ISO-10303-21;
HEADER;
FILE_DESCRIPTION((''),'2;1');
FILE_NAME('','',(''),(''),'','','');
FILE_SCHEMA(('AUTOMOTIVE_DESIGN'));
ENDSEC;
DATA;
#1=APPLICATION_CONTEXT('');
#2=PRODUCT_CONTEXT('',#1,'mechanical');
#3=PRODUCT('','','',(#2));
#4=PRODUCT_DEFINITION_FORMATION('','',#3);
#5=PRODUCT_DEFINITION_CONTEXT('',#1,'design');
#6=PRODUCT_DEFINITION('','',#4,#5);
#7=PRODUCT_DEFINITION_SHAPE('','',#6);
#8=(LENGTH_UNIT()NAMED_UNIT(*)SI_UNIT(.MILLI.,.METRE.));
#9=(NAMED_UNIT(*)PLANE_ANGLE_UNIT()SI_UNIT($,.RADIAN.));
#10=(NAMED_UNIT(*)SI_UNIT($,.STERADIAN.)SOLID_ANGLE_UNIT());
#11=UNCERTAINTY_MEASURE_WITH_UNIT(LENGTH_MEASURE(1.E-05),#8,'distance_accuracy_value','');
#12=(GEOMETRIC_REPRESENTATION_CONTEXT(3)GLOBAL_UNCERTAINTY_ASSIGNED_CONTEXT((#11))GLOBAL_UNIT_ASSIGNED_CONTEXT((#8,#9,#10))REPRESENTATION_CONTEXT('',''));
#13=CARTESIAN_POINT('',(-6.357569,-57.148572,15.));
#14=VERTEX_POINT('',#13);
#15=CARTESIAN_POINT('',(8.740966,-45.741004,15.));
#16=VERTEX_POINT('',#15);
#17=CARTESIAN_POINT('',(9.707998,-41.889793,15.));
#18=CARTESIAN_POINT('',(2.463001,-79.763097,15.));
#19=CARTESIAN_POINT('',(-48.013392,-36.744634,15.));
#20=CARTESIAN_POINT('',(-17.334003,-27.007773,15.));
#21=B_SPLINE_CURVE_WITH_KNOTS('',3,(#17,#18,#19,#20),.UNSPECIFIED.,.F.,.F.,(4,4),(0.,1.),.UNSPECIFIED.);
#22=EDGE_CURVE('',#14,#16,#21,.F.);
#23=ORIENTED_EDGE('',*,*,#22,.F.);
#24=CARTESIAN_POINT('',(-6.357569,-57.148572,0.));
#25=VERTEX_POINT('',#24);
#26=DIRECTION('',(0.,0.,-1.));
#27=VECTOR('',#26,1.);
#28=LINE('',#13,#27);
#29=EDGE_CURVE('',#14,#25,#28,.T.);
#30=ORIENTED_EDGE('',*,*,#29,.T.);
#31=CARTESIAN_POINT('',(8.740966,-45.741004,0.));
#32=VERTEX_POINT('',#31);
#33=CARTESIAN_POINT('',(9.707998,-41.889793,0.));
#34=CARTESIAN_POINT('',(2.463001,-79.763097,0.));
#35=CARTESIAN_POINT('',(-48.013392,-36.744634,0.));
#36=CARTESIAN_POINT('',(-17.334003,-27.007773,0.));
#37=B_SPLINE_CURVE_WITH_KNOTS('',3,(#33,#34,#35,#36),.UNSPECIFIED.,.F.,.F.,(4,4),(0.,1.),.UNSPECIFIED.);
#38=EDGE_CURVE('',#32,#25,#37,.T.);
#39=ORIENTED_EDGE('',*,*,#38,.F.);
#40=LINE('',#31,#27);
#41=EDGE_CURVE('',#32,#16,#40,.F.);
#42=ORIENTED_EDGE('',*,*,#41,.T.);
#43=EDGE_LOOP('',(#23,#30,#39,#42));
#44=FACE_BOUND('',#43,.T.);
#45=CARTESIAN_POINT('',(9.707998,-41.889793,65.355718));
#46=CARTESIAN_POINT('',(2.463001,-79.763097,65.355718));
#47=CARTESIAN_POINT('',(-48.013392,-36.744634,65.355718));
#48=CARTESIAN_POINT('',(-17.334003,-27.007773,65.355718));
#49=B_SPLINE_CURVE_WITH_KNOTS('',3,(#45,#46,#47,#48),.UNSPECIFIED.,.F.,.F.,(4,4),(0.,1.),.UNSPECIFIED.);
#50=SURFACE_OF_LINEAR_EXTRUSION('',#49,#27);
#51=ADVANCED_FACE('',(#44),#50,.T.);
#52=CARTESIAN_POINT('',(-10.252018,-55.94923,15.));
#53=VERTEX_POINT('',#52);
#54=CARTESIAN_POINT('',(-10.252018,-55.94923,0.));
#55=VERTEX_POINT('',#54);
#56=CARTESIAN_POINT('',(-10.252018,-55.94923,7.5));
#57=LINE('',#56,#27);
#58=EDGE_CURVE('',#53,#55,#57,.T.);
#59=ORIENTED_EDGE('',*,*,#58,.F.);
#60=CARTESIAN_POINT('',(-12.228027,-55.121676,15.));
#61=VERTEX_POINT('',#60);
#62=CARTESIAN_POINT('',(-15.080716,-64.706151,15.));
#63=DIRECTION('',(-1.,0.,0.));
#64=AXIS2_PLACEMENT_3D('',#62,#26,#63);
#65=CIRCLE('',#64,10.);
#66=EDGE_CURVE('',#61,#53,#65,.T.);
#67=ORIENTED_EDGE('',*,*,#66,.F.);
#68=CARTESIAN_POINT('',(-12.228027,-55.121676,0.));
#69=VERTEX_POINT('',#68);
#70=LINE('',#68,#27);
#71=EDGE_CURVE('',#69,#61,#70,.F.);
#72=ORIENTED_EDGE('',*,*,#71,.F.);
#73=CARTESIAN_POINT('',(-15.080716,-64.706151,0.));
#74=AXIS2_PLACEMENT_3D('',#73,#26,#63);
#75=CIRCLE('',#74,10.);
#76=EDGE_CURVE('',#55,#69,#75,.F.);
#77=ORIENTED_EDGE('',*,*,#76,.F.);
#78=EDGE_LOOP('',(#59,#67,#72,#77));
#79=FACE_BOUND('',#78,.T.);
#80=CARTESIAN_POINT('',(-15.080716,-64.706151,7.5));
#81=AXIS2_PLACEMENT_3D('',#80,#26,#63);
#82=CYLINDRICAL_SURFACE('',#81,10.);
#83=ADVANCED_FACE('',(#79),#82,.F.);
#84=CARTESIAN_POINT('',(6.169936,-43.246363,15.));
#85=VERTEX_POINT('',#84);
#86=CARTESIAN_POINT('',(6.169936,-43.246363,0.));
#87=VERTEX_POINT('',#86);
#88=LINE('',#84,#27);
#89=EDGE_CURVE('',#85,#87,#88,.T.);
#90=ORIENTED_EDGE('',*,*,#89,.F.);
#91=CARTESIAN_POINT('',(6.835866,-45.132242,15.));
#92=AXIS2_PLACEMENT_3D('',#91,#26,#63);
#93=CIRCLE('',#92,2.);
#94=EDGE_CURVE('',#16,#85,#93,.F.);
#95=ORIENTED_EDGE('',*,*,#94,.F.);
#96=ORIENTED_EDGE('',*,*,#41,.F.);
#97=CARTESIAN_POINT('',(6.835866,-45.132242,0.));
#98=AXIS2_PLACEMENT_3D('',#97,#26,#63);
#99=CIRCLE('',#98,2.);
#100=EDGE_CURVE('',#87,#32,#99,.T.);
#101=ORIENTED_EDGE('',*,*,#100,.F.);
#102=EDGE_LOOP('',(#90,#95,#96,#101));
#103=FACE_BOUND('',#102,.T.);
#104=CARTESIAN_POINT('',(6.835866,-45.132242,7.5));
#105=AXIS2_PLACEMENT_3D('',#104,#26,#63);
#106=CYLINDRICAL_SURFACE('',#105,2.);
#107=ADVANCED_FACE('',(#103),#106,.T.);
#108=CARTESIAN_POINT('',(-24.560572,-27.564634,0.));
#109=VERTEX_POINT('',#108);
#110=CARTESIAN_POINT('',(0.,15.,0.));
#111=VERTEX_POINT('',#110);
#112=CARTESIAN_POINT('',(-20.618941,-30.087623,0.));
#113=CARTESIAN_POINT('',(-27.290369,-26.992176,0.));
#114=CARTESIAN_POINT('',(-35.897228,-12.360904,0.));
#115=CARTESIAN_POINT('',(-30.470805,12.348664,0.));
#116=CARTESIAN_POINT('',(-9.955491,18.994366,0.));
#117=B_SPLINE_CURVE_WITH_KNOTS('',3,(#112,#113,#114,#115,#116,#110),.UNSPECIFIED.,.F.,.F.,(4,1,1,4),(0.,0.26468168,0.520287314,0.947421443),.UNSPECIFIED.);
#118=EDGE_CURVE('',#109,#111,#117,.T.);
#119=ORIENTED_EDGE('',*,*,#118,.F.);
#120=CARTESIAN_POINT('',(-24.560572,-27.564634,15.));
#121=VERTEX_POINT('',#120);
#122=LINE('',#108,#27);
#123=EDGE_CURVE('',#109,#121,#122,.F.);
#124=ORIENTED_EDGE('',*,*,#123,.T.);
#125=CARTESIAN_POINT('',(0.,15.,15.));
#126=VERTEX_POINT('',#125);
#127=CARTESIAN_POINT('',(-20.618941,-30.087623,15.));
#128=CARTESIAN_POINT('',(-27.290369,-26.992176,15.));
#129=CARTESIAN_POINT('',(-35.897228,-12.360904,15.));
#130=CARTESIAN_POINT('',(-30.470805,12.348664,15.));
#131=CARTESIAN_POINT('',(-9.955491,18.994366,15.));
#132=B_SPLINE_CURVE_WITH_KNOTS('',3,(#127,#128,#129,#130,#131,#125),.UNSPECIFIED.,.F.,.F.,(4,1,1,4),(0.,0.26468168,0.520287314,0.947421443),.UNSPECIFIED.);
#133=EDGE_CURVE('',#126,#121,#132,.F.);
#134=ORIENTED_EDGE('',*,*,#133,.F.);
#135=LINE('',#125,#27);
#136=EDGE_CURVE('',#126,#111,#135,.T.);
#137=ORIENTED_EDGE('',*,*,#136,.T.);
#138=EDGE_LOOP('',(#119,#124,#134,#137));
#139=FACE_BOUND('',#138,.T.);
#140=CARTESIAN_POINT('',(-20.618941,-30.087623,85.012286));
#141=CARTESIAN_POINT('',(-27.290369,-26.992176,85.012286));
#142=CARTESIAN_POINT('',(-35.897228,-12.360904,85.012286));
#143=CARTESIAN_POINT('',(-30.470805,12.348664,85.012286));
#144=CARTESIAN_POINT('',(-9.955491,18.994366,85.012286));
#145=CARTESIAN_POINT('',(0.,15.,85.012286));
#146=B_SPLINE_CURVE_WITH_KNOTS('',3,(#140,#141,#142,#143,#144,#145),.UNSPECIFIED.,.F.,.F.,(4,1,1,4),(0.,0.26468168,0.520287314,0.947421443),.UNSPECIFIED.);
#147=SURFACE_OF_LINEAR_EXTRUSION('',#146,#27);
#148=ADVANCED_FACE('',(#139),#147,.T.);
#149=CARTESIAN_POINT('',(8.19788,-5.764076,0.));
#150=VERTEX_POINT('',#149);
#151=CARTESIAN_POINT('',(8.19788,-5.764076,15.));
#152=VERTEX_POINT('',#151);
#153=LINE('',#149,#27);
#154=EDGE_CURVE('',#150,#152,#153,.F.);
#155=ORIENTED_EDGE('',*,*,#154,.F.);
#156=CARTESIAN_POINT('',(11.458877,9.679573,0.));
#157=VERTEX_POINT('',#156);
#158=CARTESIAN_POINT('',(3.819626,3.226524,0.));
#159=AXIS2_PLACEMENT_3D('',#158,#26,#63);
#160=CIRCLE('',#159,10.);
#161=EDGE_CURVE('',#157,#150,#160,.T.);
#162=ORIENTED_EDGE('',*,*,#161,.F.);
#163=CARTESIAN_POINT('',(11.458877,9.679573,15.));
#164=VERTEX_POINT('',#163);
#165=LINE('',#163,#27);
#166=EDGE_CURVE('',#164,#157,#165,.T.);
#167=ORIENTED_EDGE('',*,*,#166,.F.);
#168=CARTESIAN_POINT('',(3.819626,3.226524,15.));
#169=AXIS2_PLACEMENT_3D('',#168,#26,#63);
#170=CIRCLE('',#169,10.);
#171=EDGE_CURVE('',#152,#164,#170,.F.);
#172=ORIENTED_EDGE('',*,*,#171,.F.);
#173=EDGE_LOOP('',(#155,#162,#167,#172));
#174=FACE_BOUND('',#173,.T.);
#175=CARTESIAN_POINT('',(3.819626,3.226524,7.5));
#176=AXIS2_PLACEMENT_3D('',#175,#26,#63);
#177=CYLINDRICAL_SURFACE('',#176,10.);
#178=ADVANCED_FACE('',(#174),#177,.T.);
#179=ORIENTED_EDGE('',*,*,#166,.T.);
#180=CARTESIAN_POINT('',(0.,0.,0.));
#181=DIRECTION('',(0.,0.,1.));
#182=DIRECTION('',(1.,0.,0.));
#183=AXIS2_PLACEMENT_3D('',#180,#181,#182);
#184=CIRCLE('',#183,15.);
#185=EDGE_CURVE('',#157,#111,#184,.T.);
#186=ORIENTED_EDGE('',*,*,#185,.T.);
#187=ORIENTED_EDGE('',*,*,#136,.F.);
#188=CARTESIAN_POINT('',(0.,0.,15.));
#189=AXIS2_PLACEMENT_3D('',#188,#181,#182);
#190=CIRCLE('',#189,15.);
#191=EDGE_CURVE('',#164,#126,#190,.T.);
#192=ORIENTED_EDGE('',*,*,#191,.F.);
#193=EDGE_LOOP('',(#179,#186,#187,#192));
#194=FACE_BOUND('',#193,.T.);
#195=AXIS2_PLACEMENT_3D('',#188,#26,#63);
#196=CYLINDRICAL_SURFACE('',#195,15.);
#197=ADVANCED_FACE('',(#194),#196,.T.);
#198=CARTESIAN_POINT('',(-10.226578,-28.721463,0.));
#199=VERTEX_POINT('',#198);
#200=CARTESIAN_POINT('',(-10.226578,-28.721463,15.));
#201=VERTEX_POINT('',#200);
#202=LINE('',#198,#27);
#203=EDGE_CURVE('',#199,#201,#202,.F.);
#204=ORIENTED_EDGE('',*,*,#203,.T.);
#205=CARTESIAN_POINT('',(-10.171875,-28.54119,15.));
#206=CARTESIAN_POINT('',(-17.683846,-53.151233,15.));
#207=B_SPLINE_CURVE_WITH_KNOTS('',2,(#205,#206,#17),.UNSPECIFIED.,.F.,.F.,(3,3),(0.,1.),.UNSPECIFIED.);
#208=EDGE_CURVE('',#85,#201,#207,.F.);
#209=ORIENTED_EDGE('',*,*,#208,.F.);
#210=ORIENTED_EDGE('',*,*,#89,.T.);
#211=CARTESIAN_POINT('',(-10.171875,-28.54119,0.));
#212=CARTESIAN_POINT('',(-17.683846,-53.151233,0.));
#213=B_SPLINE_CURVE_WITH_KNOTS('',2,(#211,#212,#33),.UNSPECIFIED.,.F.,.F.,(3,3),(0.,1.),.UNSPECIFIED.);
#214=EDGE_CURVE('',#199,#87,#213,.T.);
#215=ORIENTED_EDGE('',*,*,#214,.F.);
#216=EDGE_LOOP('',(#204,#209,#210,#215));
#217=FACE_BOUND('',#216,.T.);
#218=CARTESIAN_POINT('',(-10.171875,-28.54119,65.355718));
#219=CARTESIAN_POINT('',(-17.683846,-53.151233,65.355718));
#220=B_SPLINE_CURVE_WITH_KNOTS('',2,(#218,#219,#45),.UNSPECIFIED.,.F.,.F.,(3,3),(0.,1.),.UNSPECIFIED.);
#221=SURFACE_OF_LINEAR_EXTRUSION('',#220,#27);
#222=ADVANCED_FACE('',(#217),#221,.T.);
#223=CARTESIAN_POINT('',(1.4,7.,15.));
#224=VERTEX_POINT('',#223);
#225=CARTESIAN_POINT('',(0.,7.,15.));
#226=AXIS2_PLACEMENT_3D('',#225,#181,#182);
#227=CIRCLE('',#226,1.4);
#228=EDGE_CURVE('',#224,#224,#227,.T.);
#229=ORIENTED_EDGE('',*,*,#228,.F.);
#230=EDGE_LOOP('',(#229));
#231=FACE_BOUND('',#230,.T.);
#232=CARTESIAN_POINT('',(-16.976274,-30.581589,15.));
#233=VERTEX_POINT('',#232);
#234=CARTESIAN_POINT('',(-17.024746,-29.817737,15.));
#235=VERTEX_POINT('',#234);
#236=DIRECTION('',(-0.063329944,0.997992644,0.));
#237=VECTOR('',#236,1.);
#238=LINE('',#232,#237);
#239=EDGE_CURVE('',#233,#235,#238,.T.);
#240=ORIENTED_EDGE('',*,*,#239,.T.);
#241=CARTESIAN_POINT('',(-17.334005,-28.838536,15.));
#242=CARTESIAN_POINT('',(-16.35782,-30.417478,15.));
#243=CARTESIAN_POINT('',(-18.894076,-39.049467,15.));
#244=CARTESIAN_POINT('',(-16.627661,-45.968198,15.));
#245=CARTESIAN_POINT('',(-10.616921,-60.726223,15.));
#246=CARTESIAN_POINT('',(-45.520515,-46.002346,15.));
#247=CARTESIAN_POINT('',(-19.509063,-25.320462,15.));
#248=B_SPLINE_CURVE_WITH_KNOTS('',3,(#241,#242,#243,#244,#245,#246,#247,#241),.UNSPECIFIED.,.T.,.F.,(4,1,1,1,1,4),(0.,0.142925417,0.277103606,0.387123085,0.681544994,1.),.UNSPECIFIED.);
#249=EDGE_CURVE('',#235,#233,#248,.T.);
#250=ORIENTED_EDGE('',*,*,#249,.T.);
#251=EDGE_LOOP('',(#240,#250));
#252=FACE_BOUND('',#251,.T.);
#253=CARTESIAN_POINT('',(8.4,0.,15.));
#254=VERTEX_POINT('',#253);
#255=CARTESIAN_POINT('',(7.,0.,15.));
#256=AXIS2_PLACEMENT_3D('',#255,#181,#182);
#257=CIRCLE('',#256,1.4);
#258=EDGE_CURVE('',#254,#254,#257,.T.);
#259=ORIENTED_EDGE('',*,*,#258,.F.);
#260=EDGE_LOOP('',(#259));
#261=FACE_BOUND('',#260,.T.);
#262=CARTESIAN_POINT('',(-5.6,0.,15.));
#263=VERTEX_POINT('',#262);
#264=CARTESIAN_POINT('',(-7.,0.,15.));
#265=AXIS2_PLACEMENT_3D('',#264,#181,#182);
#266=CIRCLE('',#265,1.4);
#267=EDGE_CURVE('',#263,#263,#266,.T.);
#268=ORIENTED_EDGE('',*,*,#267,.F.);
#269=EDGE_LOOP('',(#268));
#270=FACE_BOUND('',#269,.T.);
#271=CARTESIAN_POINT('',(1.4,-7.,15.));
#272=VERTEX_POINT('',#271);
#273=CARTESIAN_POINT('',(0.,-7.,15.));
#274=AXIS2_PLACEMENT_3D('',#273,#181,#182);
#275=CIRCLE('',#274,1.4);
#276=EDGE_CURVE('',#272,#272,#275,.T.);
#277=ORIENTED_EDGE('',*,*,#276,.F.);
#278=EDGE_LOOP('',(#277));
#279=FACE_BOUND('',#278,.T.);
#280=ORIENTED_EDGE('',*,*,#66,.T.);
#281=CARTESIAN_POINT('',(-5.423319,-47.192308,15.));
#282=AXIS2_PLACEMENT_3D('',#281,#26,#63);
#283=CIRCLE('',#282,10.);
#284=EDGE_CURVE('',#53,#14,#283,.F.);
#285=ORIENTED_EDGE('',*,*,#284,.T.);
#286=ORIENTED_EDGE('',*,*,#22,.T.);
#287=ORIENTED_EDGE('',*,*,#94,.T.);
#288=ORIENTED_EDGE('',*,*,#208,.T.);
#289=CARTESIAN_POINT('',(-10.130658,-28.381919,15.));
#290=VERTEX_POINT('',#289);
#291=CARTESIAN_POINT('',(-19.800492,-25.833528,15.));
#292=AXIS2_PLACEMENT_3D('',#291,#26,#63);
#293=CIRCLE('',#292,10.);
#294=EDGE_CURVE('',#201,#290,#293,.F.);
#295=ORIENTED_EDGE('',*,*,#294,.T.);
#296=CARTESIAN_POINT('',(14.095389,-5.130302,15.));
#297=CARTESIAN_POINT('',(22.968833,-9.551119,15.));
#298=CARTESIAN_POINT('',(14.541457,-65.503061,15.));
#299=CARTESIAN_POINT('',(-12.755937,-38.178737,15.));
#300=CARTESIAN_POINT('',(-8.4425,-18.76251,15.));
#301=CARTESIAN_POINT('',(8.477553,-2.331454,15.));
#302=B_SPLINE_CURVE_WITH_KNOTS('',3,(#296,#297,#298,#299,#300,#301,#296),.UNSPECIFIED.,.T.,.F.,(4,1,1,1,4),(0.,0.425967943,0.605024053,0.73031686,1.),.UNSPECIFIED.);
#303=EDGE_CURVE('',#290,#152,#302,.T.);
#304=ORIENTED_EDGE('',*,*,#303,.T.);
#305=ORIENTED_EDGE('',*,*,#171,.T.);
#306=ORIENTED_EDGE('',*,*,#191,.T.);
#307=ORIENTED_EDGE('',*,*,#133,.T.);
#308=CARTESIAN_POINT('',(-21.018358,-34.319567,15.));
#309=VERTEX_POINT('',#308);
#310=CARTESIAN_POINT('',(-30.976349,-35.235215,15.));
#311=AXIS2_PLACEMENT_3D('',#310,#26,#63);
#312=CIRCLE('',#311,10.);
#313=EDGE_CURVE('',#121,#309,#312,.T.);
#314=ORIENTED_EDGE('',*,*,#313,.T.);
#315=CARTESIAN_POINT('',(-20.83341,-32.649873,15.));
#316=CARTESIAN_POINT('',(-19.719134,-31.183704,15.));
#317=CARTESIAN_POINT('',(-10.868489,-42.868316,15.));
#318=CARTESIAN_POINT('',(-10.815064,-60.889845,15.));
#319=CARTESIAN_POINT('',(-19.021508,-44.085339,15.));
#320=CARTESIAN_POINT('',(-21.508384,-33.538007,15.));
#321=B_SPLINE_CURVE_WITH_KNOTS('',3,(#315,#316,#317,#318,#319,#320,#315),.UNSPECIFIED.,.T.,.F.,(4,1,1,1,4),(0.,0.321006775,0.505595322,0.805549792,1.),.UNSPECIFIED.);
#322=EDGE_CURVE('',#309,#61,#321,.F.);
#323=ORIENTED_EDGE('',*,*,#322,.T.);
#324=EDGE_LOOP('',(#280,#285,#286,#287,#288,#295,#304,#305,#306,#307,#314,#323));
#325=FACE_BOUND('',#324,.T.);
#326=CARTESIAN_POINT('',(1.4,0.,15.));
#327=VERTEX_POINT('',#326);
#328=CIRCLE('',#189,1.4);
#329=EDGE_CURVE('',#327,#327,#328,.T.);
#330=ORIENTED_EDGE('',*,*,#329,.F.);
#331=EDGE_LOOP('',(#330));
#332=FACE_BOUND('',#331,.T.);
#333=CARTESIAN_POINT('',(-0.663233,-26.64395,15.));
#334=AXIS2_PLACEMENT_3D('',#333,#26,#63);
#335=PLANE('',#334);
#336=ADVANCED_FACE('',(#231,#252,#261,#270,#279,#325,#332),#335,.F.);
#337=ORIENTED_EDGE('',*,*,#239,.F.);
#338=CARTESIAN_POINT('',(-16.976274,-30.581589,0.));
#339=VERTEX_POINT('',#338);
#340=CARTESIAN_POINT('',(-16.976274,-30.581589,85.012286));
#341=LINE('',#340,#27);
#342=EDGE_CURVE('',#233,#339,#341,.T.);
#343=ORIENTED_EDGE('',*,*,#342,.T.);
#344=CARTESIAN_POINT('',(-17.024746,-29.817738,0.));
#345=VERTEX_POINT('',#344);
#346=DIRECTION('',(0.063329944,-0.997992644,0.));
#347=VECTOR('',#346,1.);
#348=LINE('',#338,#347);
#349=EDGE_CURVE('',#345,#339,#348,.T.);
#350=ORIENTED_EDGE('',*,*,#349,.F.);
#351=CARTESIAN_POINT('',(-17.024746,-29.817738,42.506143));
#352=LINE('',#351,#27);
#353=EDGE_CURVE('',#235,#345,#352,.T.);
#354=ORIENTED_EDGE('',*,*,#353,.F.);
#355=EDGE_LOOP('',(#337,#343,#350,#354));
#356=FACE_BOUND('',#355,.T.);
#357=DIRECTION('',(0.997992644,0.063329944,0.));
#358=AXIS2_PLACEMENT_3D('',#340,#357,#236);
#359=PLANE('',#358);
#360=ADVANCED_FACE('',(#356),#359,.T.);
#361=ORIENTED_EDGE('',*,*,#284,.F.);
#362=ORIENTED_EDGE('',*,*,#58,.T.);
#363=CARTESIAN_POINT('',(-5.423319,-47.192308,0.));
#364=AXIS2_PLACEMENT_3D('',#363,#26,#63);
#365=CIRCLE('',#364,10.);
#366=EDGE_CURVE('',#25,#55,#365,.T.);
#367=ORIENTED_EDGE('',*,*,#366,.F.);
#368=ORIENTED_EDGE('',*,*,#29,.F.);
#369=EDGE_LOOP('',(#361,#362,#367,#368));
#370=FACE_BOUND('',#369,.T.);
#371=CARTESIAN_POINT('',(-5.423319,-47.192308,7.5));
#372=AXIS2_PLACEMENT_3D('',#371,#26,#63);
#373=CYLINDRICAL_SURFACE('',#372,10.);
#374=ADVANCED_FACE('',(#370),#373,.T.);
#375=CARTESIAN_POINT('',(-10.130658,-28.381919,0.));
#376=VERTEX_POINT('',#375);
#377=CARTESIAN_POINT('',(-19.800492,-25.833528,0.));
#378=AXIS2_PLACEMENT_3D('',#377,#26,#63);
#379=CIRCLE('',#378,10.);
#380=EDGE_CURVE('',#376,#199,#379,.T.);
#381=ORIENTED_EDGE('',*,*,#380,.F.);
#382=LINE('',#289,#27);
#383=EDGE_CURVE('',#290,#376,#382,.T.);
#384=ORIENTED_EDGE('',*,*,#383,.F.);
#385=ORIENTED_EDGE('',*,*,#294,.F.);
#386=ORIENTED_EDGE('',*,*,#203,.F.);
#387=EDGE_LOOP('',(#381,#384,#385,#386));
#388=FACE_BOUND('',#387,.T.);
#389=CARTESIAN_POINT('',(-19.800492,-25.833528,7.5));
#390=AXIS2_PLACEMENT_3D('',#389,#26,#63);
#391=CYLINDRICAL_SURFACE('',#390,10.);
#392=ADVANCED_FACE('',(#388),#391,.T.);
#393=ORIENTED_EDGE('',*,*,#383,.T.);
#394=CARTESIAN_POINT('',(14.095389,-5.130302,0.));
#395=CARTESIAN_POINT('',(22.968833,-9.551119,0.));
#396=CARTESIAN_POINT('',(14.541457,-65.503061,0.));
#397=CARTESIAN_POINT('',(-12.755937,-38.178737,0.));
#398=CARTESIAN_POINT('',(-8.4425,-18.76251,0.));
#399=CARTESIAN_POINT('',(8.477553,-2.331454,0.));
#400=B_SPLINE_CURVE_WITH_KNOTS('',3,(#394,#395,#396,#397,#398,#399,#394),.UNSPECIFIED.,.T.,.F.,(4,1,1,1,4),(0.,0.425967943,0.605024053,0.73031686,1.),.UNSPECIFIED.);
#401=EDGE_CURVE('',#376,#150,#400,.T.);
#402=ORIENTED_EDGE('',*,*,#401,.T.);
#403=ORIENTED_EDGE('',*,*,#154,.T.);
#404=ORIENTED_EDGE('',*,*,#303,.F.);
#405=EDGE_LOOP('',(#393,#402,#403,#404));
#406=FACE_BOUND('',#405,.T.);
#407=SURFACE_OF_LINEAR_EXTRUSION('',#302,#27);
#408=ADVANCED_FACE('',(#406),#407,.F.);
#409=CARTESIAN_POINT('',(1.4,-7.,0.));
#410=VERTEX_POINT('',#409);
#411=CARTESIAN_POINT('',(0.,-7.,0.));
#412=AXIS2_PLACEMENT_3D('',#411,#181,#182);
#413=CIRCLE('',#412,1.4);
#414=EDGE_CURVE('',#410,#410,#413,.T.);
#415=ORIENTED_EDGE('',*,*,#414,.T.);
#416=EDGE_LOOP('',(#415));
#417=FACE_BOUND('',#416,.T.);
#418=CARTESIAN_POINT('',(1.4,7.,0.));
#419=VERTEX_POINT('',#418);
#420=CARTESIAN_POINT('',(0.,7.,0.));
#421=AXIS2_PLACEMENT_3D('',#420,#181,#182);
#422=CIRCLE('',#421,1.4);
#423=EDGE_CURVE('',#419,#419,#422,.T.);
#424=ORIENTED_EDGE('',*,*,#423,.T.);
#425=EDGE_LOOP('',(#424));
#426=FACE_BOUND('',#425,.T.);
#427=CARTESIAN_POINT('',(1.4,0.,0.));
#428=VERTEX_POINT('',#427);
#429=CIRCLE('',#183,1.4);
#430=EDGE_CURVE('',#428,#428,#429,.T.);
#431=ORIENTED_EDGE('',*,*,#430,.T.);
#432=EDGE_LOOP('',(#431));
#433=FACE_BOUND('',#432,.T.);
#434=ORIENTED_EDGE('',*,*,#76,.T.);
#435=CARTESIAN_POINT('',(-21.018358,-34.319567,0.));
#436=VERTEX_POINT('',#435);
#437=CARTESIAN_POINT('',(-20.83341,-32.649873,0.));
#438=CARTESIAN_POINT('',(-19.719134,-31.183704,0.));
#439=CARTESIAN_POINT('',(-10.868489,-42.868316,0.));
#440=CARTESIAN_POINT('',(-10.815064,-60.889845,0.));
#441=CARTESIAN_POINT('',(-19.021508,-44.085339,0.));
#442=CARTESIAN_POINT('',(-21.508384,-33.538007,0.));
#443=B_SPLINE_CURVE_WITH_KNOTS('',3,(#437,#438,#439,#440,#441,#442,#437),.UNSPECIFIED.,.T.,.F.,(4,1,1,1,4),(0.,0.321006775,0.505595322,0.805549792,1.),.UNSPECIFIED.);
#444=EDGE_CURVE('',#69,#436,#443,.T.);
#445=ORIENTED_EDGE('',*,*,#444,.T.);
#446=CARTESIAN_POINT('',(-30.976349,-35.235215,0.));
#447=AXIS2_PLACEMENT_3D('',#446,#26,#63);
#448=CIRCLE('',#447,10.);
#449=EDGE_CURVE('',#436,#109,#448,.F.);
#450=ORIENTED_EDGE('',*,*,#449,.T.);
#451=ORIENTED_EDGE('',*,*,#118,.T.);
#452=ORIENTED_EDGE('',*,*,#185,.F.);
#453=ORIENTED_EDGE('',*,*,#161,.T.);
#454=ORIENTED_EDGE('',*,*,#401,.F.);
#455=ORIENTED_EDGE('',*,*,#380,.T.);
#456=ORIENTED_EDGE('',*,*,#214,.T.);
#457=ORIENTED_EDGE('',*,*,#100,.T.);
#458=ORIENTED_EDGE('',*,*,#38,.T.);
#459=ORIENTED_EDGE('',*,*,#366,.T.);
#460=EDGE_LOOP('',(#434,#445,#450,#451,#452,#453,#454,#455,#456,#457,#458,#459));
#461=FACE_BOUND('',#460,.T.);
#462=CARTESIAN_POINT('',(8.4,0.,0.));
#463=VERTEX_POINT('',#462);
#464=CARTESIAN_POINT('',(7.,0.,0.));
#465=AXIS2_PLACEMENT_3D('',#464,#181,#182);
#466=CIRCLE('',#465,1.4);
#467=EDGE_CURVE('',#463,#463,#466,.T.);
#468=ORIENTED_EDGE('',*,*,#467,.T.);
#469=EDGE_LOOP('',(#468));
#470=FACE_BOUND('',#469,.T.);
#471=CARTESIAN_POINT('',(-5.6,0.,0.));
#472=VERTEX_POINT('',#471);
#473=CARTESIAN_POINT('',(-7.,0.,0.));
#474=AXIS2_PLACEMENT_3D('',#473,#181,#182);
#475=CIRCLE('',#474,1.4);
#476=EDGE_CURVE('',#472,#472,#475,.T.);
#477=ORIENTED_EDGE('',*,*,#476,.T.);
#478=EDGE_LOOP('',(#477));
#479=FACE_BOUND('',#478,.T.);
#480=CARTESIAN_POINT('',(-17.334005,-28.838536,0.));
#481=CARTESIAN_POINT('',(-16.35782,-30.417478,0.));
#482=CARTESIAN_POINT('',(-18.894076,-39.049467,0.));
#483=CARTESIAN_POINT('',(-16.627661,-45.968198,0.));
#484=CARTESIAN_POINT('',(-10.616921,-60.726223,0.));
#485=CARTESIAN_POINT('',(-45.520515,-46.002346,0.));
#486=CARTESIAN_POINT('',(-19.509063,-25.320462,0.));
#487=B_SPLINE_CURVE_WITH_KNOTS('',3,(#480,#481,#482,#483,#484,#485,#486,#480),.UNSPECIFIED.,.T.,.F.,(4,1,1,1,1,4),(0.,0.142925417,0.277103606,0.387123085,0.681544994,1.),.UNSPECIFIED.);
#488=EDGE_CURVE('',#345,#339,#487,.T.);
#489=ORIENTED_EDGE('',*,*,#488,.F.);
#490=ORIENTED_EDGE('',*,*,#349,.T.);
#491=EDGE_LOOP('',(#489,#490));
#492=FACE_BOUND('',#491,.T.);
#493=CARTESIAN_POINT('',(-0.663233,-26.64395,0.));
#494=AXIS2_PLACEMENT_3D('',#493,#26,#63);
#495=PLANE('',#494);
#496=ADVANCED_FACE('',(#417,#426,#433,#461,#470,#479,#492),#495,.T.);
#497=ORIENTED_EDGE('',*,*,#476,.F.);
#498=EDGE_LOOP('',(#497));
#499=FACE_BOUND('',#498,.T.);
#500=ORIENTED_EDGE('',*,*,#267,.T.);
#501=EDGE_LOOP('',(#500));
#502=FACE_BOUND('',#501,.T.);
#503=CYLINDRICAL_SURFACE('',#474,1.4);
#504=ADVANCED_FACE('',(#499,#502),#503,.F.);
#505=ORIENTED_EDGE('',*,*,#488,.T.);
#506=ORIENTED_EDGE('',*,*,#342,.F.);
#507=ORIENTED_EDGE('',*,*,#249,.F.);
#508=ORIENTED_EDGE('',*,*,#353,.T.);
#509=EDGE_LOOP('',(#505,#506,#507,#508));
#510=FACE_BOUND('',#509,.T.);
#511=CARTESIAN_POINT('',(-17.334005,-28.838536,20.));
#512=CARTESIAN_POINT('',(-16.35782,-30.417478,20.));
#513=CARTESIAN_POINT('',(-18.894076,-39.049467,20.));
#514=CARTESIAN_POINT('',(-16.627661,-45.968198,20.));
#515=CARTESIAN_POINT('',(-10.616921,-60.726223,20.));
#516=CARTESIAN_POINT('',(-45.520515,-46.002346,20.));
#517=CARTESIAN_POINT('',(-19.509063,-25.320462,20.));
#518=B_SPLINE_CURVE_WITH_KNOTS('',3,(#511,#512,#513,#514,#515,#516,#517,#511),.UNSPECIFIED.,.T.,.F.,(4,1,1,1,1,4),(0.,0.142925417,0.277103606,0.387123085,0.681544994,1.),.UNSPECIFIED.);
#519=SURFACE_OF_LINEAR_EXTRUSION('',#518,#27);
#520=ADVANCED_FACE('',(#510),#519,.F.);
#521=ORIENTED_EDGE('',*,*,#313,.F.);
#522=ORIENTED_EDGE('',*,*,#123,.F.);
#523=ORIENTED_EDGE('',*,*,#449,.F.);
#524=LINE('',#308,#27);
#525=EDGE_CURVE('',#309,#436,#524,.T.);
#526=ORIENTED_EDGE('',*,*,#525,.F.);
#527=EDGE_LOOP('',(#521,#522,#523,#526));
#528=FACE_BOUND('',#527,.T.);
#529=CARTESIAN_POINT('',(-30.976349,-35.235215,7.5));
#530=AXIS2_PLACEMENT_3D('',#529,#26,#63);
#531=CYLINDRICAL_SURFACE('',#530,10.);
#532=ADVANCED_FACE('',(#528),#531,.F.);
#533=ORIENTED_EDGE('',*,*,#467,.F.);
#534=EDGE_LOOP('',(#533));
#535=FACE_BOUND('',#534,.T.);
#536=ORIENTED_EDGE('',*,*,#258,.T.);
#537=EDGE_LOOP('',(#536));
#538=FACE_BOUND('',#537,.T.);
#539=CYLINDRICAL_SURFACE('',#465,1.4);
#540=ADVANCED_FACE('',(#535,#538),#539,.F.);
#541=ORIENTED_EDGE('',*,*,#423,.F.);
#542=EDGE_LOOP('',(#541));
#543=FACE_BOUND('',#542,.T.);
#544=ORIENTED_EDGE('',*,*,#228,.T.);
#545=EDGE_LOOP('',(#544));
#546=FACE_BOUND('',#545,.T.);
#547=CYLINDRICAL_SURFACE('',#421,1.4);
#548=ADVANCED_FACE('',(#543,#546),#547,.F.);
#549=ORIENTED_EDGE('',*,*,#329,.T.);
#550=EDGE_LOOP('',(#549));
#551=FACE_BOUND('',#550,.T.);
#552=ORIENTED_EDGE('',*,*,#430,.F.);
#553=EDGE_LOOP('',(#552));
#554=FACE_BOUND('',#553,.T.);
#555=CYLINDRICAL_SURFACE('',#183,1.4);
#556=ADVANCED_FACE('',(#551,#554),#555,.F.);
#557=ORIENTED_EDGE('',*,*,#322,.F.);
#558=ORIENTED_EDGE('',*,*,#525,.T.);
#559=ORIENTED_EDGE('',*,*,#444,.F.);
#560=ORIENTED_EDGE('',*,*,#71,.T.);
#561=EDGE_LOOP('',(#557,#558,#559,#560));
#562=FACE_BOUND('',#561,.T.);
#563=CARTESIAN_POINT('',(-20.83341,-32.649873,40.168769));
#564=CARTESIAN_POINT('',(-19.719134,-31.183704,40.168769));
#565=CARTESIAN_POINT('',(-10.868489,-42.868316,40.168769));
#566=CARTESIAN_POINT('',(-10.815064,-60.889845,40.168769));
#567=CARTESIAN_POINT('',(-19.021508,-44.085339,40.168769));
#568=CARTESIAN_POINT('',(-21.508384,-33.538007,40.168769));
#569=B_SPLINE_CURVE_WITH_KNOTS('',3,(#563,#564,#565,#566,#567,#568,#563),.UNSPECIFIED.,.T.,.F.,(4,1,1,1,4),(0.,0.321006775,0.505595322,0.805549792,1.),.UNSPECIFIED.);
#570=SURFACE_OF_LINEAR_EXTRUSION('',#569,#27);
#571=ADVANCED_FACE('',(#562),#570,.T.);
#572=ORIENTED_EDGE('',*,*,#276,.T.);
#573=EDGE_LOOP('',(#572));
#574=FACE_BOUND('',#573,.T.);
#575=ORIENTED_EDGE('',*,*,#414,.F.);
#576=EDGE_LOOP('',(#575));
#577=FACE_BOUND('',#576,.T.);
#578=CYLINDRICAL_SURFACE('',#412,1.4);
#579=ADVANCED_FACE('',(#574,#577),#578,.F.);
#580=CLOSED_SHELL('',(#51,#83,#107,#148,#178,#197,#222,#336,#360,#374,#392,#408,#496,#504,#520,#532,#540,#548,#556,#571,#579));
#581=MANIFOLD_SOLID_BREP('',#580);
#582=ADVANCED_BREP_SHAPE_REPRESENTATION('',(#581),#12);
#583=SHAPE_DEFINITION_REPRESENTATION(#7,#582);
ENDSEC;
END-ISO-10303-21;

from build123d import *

# Parameters (mm, degrees)
EXTRUDE_1_DEPTH     = 15
SKETCH_3_R          = 1.4
CUT_EXTRUDE_2_DEPTH = 45.491091955
CUT_EXTRUDE_3_DEPTH = 45.491091955
EXTRUDE_2_DEPTH     = 15
FILLET_1_R          = 2
FILLET_START        = -1
FILLET_2_DEPTH      = 17
FILLET_3_R          = 10
CUT_EXTRUDE_4_DEPTH = 20
CUT_EXTRUDE_5_DEPTH = 20
EXTRUDE_3_DEPTH     = 15
FILLET_10_DEPTH     = 17
FILLET_10_2_DEPTH   = 15
FILLET_11_R         = 5
FILLET_12_R         = 10
EXTRUDE_4_DEPTH     = 15
FILLET_13_R         = 10


with BuildPart() as part:
    # 草图1 → 凸台-拉伸1 (new body)
    with BuildSketch(Plane.XY):
        with BuildLine():
            ThreePointArc((14.095389312, -5.13030215), (12.287280664, 8.603646545), (0, 15))
            add(Edge.make_bspline(
                [(0, 15), (-0.174596768, 14.999999319), (-0.436611581, 14.999693042), (-0.786186323, 14.998643785), (-1.048915847, 14.997519085), (-1.312216235, 14.99603471), (-1.576228693, 14.994161918), (-1.84109342, 14.991865662), (-2.106949414, 14.989104591), (-2.373934268, 14.985831089), (-2.642183971, 14.981991319), (-2.911832716, 14.977525266), (-3.1830127, 14.972366794), (-3.455853932, 14.966443701), (-3.730484039, 14.959677782), (-4.007028071, 14.9519849), (-4.285608318, 14.943275054), (-4.566344116, 14.933452466), (-4.849351664, 14.922415656), (-5.134743838, 14.910057537), (-5.422630012, 14.896265505), (-5.713115875, 14.880921543), (-6.006303259, 14.863902316), (-6.302289959, 14.84507929), (-6.601169567, 14.824318836), (-6.903031299, 14.801482354), (-7.207959833, 14.776426392), (-7.516035146, 14.749002775), (-7.827332351, 14.719058736), (-8.141921549, 14.686437053), (-8.459867669, 14.650976187), (-8.781230323, 14.612510428), (-9.106063662, 14.570870045), (-9.434416233, 14.525881438), (-9.766330843, 14.477367292), (-10.101844426, 14.425146744), (-10.440987913, 14.36903554), (-10.783786108, 14.30884621), (-11.130257567, 14.244388236), (-11.480414483, 14.175468229), (-11.834262574, 14.101890107), (-12.191800976, 14.023455277), (-12.553022141, 13.939962822), (-12.917911738, 13.851209688), (-13.286448564, 13.756990875), (-13.658604451, 13.657099633), (-14.03434419, 13.551327657), (-14.413625446, 13.439465288), (-14.796398691, 13.321301714), (-15.182607133, 13.196625177), (-15.572186657, 13.065223175), (-15.965065767, 12.926882676), (-16.361165533, 12.781390325), (-16.760399548, 12.62853266), (-17.162673883, 12.468096321), (-17.567887059, 12.299868276), (-17.975930009, 12.12363602), (-18.386686074, 11.939187837), (-18.800030904, 11.746312879), (-19.21583277, 11.544801919), (-19.63395132, 11.334445536), (-20.054242271, 11.115042096), (-20.476539575, 10.886368472), (-20.900723293, 10.648292485), (-21.326461435, 10.400346233), (-21.753514654, 10.143757392), (-22.178049863, 9.87535726), (-22.595959424, 9.592299141), (-23.006858872, 9.296248411), (-23.410215858, 8.987163154), (-23.805723663, 8.665361009), (-24.19302422, 8.331073979), (-24.571782966, 7.984568061), (-24.94166894, 7.626110759), (-25.302360391, 7.255979562), (-25.65354351, 6.874459377), (-25.994913004, 6.481842935), (-26.326172169, 6.078430394), (-26.647033089, 5.664529144), (-26.957216795, 5.240453567), (-27.256453426, 4.80652479), (-27.544482381, 4.363070443), (-27.82105247, 3.910424411), (-28.085922052, 3.448926584), (-28.338859169, 2.978922599), (-28.579641679, 2.500763586), (-28.808057373, 2.014805906), (-29.023904095, 1.521410888), (-29.226989847, 1.020944566), (-29.417132895, 0.513777409), (-29.594161862, 0.000284053), (-29.757915818, -0.519156969), (-29.908244365, -1.044163505), (-30.045007708, -1.574350056), (-30.168076728, -2.109328051), (-30.277333041, -2.648706129), (-30.372669056, -3.192090415), (-30.453988019, -3.739084801), (-30.521204062, -4.289291227), (-30.574242228, -4.842309963), (-30.613038507, -5.39773989), (-30.637539851, -5.955178784), (-30.647704191, -6.514223598), (-30.643500444, -7.074470745), (-30.624908509, -7.63551638), (-30.591919266, -8.196956684), (-30.544534557, -8.758388145), (-30.48276717, -9.319407838), (-30.406640805, -9.879613709), (-30.316190047, -10.438604851), (-30.21146032, -10.995981785), (-30.092507839, -11.551346736), (-29.95939956, -12.104303912), (-29.812213112, -12.654459772), (-29.651036733, -13.201423307), (-29.475969194, -13.744806302), (-29.287119719, -14.284223615), (-29.084607895, -14.819293432), (-28.868563581, -15.349637541), (-28.639126801, -15.874881588), (-28.396447646, -16.394655341), (-28.140686152, -16.908592941), (-27.872012186, -17.416333158), (-27.590605319, -17.917519643), (-27.296654692, -18.411801174), (-26.990358881, -18.898831896), (-26.671925755, -19.378271573), (-26.341572303, -19.849785794), (-25.885480421, -20.467504768), (-25.526267712, -20.917866263), (-25.279466623, -21.21199112)],
                knots=[0, 0, 0, 0, 0.008983592, 0.013481544, 0.017986876, 0.022502032, 0.027029448, 0.031571543, 0.036130722, 0.040709366, 0.045309838, 0.049934477, 0.054585593, 0.059265472, 0.063976367, 0.068720504, 0.073500073, 0.078317234, 0.083174111, 0.088072793, 0.093015336, 0.098003759, 0.103040044, 0.108126138, 0.113263955, 0.118455369, 0.123702222, 0.129006319, 0.134369433, 0.139793302, 0.145279632, 0.150830096, 0.156446337, 0.162129965, 0.167882565, 0.173705688, 0.179600863, 0.185569587, 0.191613334, 0.197733555, 0.203931674, 0.210209093, 0.216567194, 0.223007337, 0.229530862, 0.236139089, 0.242833322, 0.249614847, 0.256484933, 0.263444834, 0.270495789, 0.277639024, 0.284875752, 0.292207171, 0.299634469, 0.307158825, 0.314781404, 0.322503362, 0.330325849, 0.338250002, 0.346276954, 0.354407827, 0.362643738, 0.370985797, 0.379435108, 0.387992769, 0.396619209, 0.405274739, 0.413959558, 0.422673829, 0.431417677, 0.440191194, 0.448994436, 0.457827427, 0.466690157, 0.475582587, 0.484504647, 0.493456237, 0.50243723, 0.511447469, 0.520486775, 0.529554938, 0.538651727, 0.547776885, 0.556930133, 0.566111169, 0.575319669, 0.584555288, 0.593817663, 0.603106409, 0.612421123, 0.621761385, 0.631126755, 0.64051678, 0.649930987, 0.659368891, 0.66882999, 0.678313767, 0.687819694, 0.697347228, 0.706895812, 0.71646488, 0.726053851, 0.735662137, 0.745289135, 0.754934234, 0.764596814, 0.774276244, 0.783971886, 0.793683092, 0.803409207, 0.813149569, 0.822903507, 0.832670344, 0.8424494, 0.852239983, 0.862041401, 0.871852953, 0.881673937, 0.891503642, 0.901341356, 0.911186363, 0.921037943, 0.930895373, 0.940757928, 0.95062488, 0.960495499, 0.970369054, 0.980244811, 1, 1, 1, 1], degree=3))
            add(Edge.make_bspline(
                [(-25.279466623, -21.21199112), (-25.03266702, -21.506118015), (-24.650058643, -21.936850324), (-24.116326131, -22.48889957), (-23.704647777, -22.89139552), (-23.281933222, -23.282038607), (-22.848561661, -23.660506241), (-22.404923763, -24.026490317), (-21.951421131, -24.379697722), (-21.48846567, -24.719850743), (-21.016478952, -25.046687464), (-20.535891561, -25.359962134), (-20.047142425, -25.659445508), (-19.550678137, -25.944925156), (-19.04695226, -26.216205747), (-18.536424623, -26.4731093), (-18.019560603, -26.715475403), (-17.496830406, -26.943161412), (-16.968708336, -27.156042604), (-16.435672059, -27.354012309), (-15.898201862, -27.536982008), (-15.35677991, -27.704881402), (-14.811889501, -27.857658441), (-14.264014323, -27.995279333), (-13.713637708, -28.117728512), (-13.161241887, -28.225008578), (-12.607307258, -28.317140209), (-12.052311649, -28.394162034), (-11.496729594, -28.456130483), (-10.941031611, -28.5031196), (-10.385683496, -28.535220833), (-9.831145623, -28.552542784), (-9.277872252, -28.555210939), (-8.726310862, -28.543367367), (-8.176901485, -28.517170386), (-7.630076062, -28.476794208), (-7.086257816, -28.422428554), (-6.545860639, -28.354278239), (-6.009288499, -28.272562744), (-5.476934872, -28.177515748), (-4.949182183, -28.069384646), (-4.426401286, -27.948430045), (-3.908950946, -27.814925234), (-3.397177365, -27.669155633), (-2.891413716, -27.511418228), (-2.391979716, -27.342020982), (-1.899181211, -27.161282232), (-1.413309805, -26.969530066), (-0.934642496, -26.767101692), (-0.463441361, -26.554342786), (4.6748e-05, -26.331606829), (0.455590466, -26.099254437), (0.902974156, -25.857652676), (1.341998114, -25.607174371), (1.77247875, -25.348197408), (2.194248731, -25.081104026), (2.607157097, -24.806280109), (3.011069352, -24.524114474), (3.405867507, -24.234998154), (3.791450116, -23.939323681), (4.167732256, -23.637484373), (4.534645494, -23.329873622), (4.892137816, -23.016884179), (5.240173528, -22.698907455), (5.578733117, -22.376332816), (5.907813101, -22.049546899), (6.22742583, -21.71893292), (6.537599266, -21.384870008), (6.838376738, -21.047732541), (7.129816662, -20.707889495), (7.411992235, -20.365703811), (7.684991105, -20.021531772), (7.948915008, -19.675722401), (8.20387939, -19.32861687), (8.450012994, -18.980547932), (8.687457427, -18.631839373), (8.916366703, -18.282805481), (9.136906768, -17.933750534), (9.349254998, -17.58496832), (9.553599678, -17.236741672), (9.750139466, -16.889342026), (9.939082834, -16.543029011), (10.120647493, -16.198050057), (10.295059808, -15.854640037), (10.462554187, -15.513020927), (10.623372469, -15.173401503), (10.777763289, -14.835977057), (10.925981441, -14.50092915), (11.068287227, -14.168425389), (11.204945795, -13.838619231), (11.336226478, -13.511649827), (11.462402118, -13.187641886), (11.583748391, -12.866705573), (11.70054313, -12.548936438), (11.813065642, -12.234415378), (11.921596028, -11.923208621), (12.026414502, -11.615367753), (12.127800711, -11.310929767), (12.226033064, -11.009917143), (12.321388061, -10.712337965), (12.414139626, -10.418186058), (12.504558455, -10.127441167), (12.592911364, -9.840069152), (12.679460654, -9.556022225), (12.76446348, -9.275239204), (12.848171238, -8.997645806), (12.93082896, -8.723154954), (13.01267473, -8.451667126), (13.093939106, -8.183070715), (13.174844564, -7.917242422), (13.255604965, -7.654047671), (13.336425025, -7.393341046), (13.417499824, -7.134966749), (13.49901432, -6.87875908), (13.581142893, -6.624542932), (13.664048917, -6.372134315), (13.747884322, -6.121340875), (13.832789331, -5.871962488), (13.947500586, -5.541332702), (14.035654827, -5.294414261), (14.095389312, -5.13030215)],
                knots=[0, 0, 0, 0, 0.021270399, 0.031903677, 0.042534645, 0.053162531, 0.063786554, 0.074405932, 0.085019874, 0.095627584, 0.106228257, 0.116821079, 0.127405228, 0.137979868, 0.148544155, 0.15909723, 0.169638222, 0.180166248, 0.190680407, 0.201179787, 0.211663457, 0.222130473, 0.232579872, 0.243010676, 0.253421887, 0.263812492, 0.27418146, 0.284527741, 0.294850266, 0.30514795, 0.315419689, 0.32566436, 0.335880824, 0.346067921, 0.356224476, 0.366349296, 0.376441173, 0.386498878, 0.396521172, 0.406506796, 0.416454478, 0.426362934, 0.436230863, 0.446056956, 0.45583989, 0.465578331, 0.475270938, 0.48491636, 0.49451324, 0.504060215, 0.513555916, 0.522998973, 0.532388013, 0.541721663, 0.550998551, 0.560217309, 0.569376572, 0.578474983, 0.587511192, 0.596483859, 0.605391658, 0.614233274, 0.623007411, 0.631712789, 0.640348151, 0.64891226, 0.657403907, 0.66582191, 0.674165115, 0.682432404, 0.690622694, 0.69873494, 0.706768137, 0.714721328, 0.7225936, 0.730384093, 0.738092, 0.745716573, 0.753257123, 0.760713027, 0.76808373, 0.775368751, 0.782567685, 0.789680206, 0.796706075, 0.803645143, 0.810497353, 0.81726275, 0.823941479, 0.830533798, 0.837040075, 0.8434608, 0.849796585, 0.856048172, 0.86221644, 0.868302406, 0.874307234, 0.880232236, 0.886078882, 0.891848803, 0.897543794, 0.903165817, 0.908717009, 0.914199683, 0.919616328, 0.924969613, 0.930262387, 0.935497677, 0.94067869, 0.945808804, 0.950891568, 0.955930696, 0.960930056, 0.965893662, 0.970825666, 0.975730339, 0.980612064, 0.985475315, 0.990324642, 1, 1, 1, 1], degree=3))
        make_face()
    extrude(amount=EXTRUDE_1_DEPTH)

    # 草图3 → 切除-拉伸2 (cut, through all)
    with BuildSketch(Plane.XY.offset(15)):
        Circle(SKETCH_3_R)
        with Locations((7, 0)):
            Circle(SKETCH_3_R)
        with Locations((0, -7)):
            Circle(SKETCH_3_R)
        with Locations((-7, 0)):
            Circle(SKETCH_3_R)
        with Locations((0, 7)):
            Circle(SKETCH_3_R)
    extrude(amount=-CUT_EXTRUDE_2_DEPTH, mode=Mode.SUBTRACT)

    # 草图4 → 切除-拉伸3 (cut, through all)
    with BuildSketch(Plane(origin=(0, 0, 0), x_dir=(-1, 0, 0), z_dir=(0, 0, -1))):
        with BuildLine():
            add(Edge.make_bspline(
                [(-14.095389312, -5.13030215), (-8.477553271, -2.33145367), (8.442499566, -18.762509722), (12.755936915, -38.178736967), (-14.541457389, -65.503061248), (-22.968832669, -9.551118862), (-14.095389312, -5.13030215)],
                knots=[0, 0, 0, 0, 0.26968314, 0.394975947, 0.574032057, 1, 1, 1, 1], degree=3))
        make_face()
    extrude(amount=-CUT_EXTRUDE_3_DEPTH, mode=Mode.SUBTRACT)

    # 草图5 → 凸台-拉伸2 (add)
    with BuildSketch(Plane(origin=(0, 0, 0), x_dir=(-1, 0, 0), z_dir=(0, 0, -1))):
        with BuildLine():
            add(Edge.make_bspline(
                [(10.171874722, -28.541189548), (17.683846291, -53.151232988), (-9.707997946, -41.889793219)],
                knots=[0, 0, 0, 1, 1, 1], degree=2))
            add(Edge.make_bspline(
                [(-9.707997946, -41.889793219), (-2.463001099, -79.763097153), (48.013392254, -36.744634011), (17.334003198, -27.007773326)],
                knots=[0, 0, 0, 0, 1, 1, 1, 1], degree=3))
            add(Edge.make_bspline(
                [(17.334003198, -27.007773326), (16.861768371, -27.20105705), (16.027625054, -27.506859328), (14.814842143, -27.864848675), (13.716286363, -28.124971876), (12.609659956, -28.324417343), (11.498796153, -28.463423353), (10.685046818, -28.521336018), (10.242958884, -28.538751516), (10.171874722, -28.541189548)],
                knots=[0.183395931, 0.183395931, 0.183395931, 0.183395931, 0.211663457, 0.232579872, 0.253421887, 0.27418146, 0.294850266, 0.315419689, 0.319359962, 0.319359962, 0.319359962, 0.319359962], degree=3))
        make_face()
    extrude(amount=-EXTRUDE_2_DEPTH)

    # 圆角1
    fillet_1_edges = [part.edges().sort_by_distance(p)[0] for p in [
        (9.707997946, -41.889793219, 7.5),
    ]]
    fillet(fillet_1_edges, radius=FILLET_1_R)

    # 圆角2: read off the stored shape, not the designer's step
    # 圆角2 outline → 圆角2 (cut)
    with BuildSketch(Plane.XY.offset(FILLET_START)):
        with BuildLine():
            add(Edge.make_bspline(
                [(-10.171874722, -28.541189548), (-10.158393322, -28.488116713), (-10.144653776, -28.435026787), (-10.130657706, -28.381918891)],
                knots=[0.681495055, 0.681495055, 0.681495055, 0.681495055, 0.683012829, 0.683012829, 0.683012829, 0.683012829], degree=3))
            ThreePointArc((-10.130657706, -28.381918891), (-10.17712039, -28.552114075), (-10.226578366, -28.721463095))
            add(Edge.make_bspline(
                [(-10.171874722, -28.541189548), (-10.199461913, -28.631568216), (-10.226578366, -28.721463095)],
                knots=[0, 0, 0, 0.00367243, 0.00367243, 0.00367243], degree=2))
        make_face()
    extrude(amount=FILLET_2_DEPTH, mode=Mode.SUBTRACT)

    # 圆角3
    fillet_3_edges = [part.edges().sort_by_distance(p)[0] for p in [
        (14.095389312, -5.13030215, 7.5),
    ]]
    fillet(fillet_3_edges, radius=FILLET_3_R)

    # 草图6 → 切除-拉伸4 (cut)
    with BuildSketch(Plane(origin=(0, 0, 0), x_dir=(-1, 0, 0), z_dir=(0, 0, -1))):
        with BuildLine():
            ThreePointArc((17.334004909, -28.838535505), (17.371905963, -27.923154694), (17.334004909, -27.007773884))
            add(Edge.make_bspline(
                [(13.73055902, -54.95243101), (25.941820402, -48.919462484), (34.820440249, -32.557525348), (17.334004909, -27.007773884)],
                knots=[0.430026556, 0.430026556, 0.430026556, 0.430026556, 0.999999963, 0.999999963, 0.999999963, 0.999999963], degree=3))
            add(Edge.make_bspline(
                [(17.334004909, -28.838535505), (28.052279378, -41.223912757), (13.73055902, -54.95243101)],
                knots=[0, 0, 0, 1, 1, 1], degree=2))
        make_face()
    extrude(amount=-CUT_EXTRUDE_4_DEPTH, mode=Mode.SUBTRACT)

    # 草图7 → 切除-拉伸5 (cut)
    with BuildSketch(Plane(origin=(0, 0, 0), x_dir=(-1, 0, 0), z_dir=(0, 0, -1))):
        with BuildLine():
            add(Edge.make_bspline(
                [(17.334004909, -28.838535505), (16.357819767, -30.417478072), (18.89407609, -39.049467108), (16.627660878, -45.968198336), (10.616921472, -60.726222639), (45.520515414, -46.002345599), (19.509062719, -25.320461714), (17.334004909, -28.838535505)],
                knots=[0, 0, 0, 0, 0.142925417, 0.277103606, 0.387123085, 0.681544994, 1, 1, 1, 1], degree=3))
        make_face()
    extrude(amount=-CUT_EXTRUDE_5_DEPTH, mode=Mode.SUBTRACT)

    # 草图8 → 凸台-拉伸3 (add)
    with BuildSketch(Plane(origin=(0, 0, 0), x_dir=(-1, 0, 0), z_dir=(0, 0, -1))):
        with BuildLine():
            Line((16.976273943, -30.581588683), (17.024745895, -29.81773752))
            add(Edge.make_bspline(
                [(17.334004909, -28.838535505), (17.175593703, -29.094759642), (17.077337103, -29.426647448), (17.024745895, -29.81773752)],
                knots=[0, 0, 0, 0, 0.023193334, 0.023193334, 0.023193334, 0.023193334], degree=3))
            ThreePointArc((17.334004909, -28.838535505), (17.371905963, -27.923154692), (17.334004909, -27.00777388))
            add(Edge.make_bspline(
                [(25.279466623, -21.21199112), (25.03266702, -21.506118015), (24.522565573, -22.08037929), (23.710347977, -22.89714981), (22.853982967, -23.66650411), (21.956551734, -24.385919792), (21.021309056, -25.053113105), (20.051664575, -25.666053342), (19.051161351, -26.222973885), (18.141767865, -26.664887828), (17.563839778, -26.913704036), (17.334004909, -27.00777388)],
                knots=[0, 0, 0, 0, 0.021270399, 0.042534645, 0.063786554, 0.085019874, 0.106228257, 0.127405228, 0.148544155, 0.169638222, 0.183395905, 0.183395905, 0.183395905, 0.183395905], degree=3))
            add(Edge.make_bspline(
                [(0, 15), (0.262014797, 14.999998978), (0.699343525, 14.999238628), (1.401538909, 14.995786143), (2.109980659, 14.989734033), (2.915961101, 14.978337798), (3.830049802, 14.958681331), (4.763807339, 14.928169831), (5.720653756, 14.882540631), (6.609655012, 14.826186274), (7.419163121, 14.759812824), (8.145673453, 14.687272778), (8.785203026, 14.613390937), (9.438606806, 14.526799364), (10.106250398, 14.426094011), (10.788405492, 14.309813904), (11.485245709, 14.176446723), (12.196842822, 14.024434295), (12.923163255, 13.852178372), (13.66406489, 13.658046601), (14.419294178, 13.440378683), (15.322614234, 13.155138445), (16.377663761, 12.783459779), (17.443972468, 12.357968513), (18.393385732, 11.939741847), (19.080016401, 11.613131439), (19.63395132, 11.334445536), (20.054242271, 11.115042096), (20.476539575, 10.886368472), (20.900723293, 10.648292485), (21.326461435, 10.400346233), (21.753514654, 10.143757392), (22.178049863, 9.87535726), (22.595959424, 9.592299141), (23.006858872, 9.296248411), (23.410215858, 8.987163154), (23.938454649, 8.557365376), (24.578113739, 7.988760142), (25.308901303, 7.259788657), (26.00163562, 6.485268624), (26.653910974, 5.667573262), (27.263461632, 4.809190379), (27.828167604, 3.912715665), (28.346059328, 2.980844637), (28.815322092, 2.016364607), (29.234300033, 1.022146413), (29.60149972, 0.001136003), (29.915593327, -1.043654147), (30.175421367, -2.109153728), (30.37999501, -3.192243409), (30.528497954, -4.289763734), (30.620287863, -5.398524083), (30.654897363, -6.515311681), (30.6320346, -7.636900631), (30.551583347, -8.76006095), (30.413602677, -9.881567589), (30.218326197, -10.998209417), (29.966160838, -12.106798143), (29.657685215, -13.20417716), (29.293647561, -14.287230295), (28.874963232, -15.35289043), (28.402711797, -16.398147996), (27.878133718, -17.420059297), (27.302626627, -18.415754665), (26.677741219, -19.382446423), (26.005176442, -20.317436362), (25.526267712, -20.917866263), (25.279466623, -21.21199112)],
                knots=[0, 0, 0, 0, 0.013481544, 0.022502032, 0.036130722, 0.049934477, 0.063976367, 0.083174111, 0.098003759, 0.113263955, 0.129006319, 0.139793302, 0.150830096, 0.162129965, 0.173705688, 0.185569587, 0.197733555, 0.210209093, 0.223007337, 0.236139089, 0.249614847, 0.263444834, 0.284875752, 0.307158825, 0.322503362, 0.338250002, 0.346276954, 0.354407827, 0.362643738, 0.370985797, 0.379435108, 0.387992769, 0.396619209, 0.405274739, 0.413959558, 0.422673829, 0.431417677, 0.448994436, 0.466690157, 0.484504647, 0.50243723, 0.520486775, 0.538651727, 0.556930133, 0.575319669, 0.593817663, 0.612421123, 0.631126755, 0.649930987, 0.66882999, 0.687819694, 0.706895812, 0.726053851, 0.745289135, 0.764596814, 0.783971886, 0.803409207, 0.822903507, 0.8424494, 0.862041401, 0.881673937, 0.901341356, 0.921037943, 0.940757928, 0.960495499, 0.980244811, 1, 1, 1, 1], degree=3))
            add(Edge.make_bspline(
                [(0, 15), (9.955491464, 18.994366054), (30.470804679, 12.348663999), (35.897228225, -12.360904323), (27.290369493, -26.992176206), (20.618940745, -30.087622849)],
                knots=[0, 0, 0, 0, 0.427134128, 0.682739763, 0.947421443, 0.947421443, 0.947421443, 0.947421443], degree=3))
            add(Edge.make_bspline(
                [(20.618940745, -30.087622849), (22.084451222, -35.206607817), (15.938636074, -51.775642121), (16.976273943, -30.581588683)],
                knots=[0, 0, 0, 0, 1, 1, 1, 1], degree=3))
        make_face()
    extrude(amount=-EXTRUDE_3_DEPTH)

    # 圆角10: read off the stored shape, not the designer's step
    # 圆角10 outline → 圆角10 (cut)
    with BuildSketch(Plane.XY.offset(FILLET_START)):
        with BuildLine():
            add(Edge.make_bspline(
                [(-14.453784771, -54.244039702), (-14.100526804, -54.5977872), (-13.73055902, -54.95243101)],
                knots=[0.974167364, 0.974167364, 0.974167364, 1, 1, 1], degree=2))
            ThreePointArc((-13.73055902, -54.95243101), (-14.127196959, -53.770289977), (-14.373636144, -52.547977868))
            add(Edge.make_bspline(
                [(-14.373636144, -52.547977868), (-14.283642901, -53.202857107), (-14.293684823, -53.783741225), (-14.453784771, -54.244039702)],
                knots=[0.355170291, 0.355170291, 0.355170291, 0.355170291, 0.387123085, 0.387123085, 0.387123085, 0.387123085], degree=3))
        make_face()
    extrude(amount=FILLET_10_DEPTH, mode=Mode.SUBTRACT)

    # Fillet 10 2 outline → Fillet 10 2 (add)
    with BuildSketch(Plane.XY):
        with BuildLine():
            ThreePointArc((-18.74589655, -40.537425822), (-17.877770434, -42.02328087), (-17.277247378, -43.635974343))
            add(Edge.make_bspline(
                [(-17.798712345, -41.01989795), (-17.696310486, -41.915313353), (-17.516700944, -42.771824813), (-17.277247378, -43.635974343)],
                knots=[0.182137805, 0.182137805, 0.182137805, 0.182137805, 0.223707572, 0.223707572, 0.223707572, 0.223707572], degree=3))
            add(Edge.make_bspline(
                [(-17.798712345, -41.01989795), (-18.085894593, -41.209228549), (-18.413933309, -41.007454549), (-18.74589655, -40.537425822)],
                knots=[0.335471124, 0.335471124, 0.335471124, 0.335471124, 0.47112469, 0.47112469, 0.47112469, 0.47112469], degree=3))
        make_face()
    extrude(amount=FILLET_10_2_DEPTH)

    # 圆角11
    fillet_11_edges = [part.edges().sort_by_distance(p)[0] for p in [
        (-20.618940745, -30.087622849, 7.5),
    ]]
    fillet(fillet_11_edges, radius=FILLET_11_R)

    # 圆角12
    fillet_12_edges = [part.edges().sort_by_distance(p)[0] for p in [
        (-13.73055902, -54.95243101, 7.5),
    ]]
    fillet(fillet_12_edges, radius=FILLET_12_R)

    # 草图9 → 凸台-拉伸4 (add)
    with BuildSketch(Plane(origin=(0, 0, 0), x_dir=(-1, 0, 0), z_dir=(0, 0, -1))):
        with BuildLine():
            add(Edge.make_bspline(
                [(20.833410383, -32.649873448), (21.508384286, -33.538007339), (19.021507662, -44.08533859), (10.815064374, -60.889845226), (10.868488682, -42.868316155), (19.719134403, -31.183703784), (20.833410383, -32.649873448)],
                knots=[0, 0, 0, 0, 0.194450208, 0.494404678, 0.678993225, 1, 1, 1, 1], degree=3))
        make_face()
    extrude(amount=-EXTRUDE_4_DEPTH)

    # 圆角13
    fillet_13_edges = [part.edges().sort_by_distance(p)[0] for p in [
        (-20.833410383, -32.649873448, 7.5),
        (-11.677276884, -54.995385558, 7.5),
    ]]
    fillet(fillet_13_edges, radius=FILLET_13_R)


solid = part.part
